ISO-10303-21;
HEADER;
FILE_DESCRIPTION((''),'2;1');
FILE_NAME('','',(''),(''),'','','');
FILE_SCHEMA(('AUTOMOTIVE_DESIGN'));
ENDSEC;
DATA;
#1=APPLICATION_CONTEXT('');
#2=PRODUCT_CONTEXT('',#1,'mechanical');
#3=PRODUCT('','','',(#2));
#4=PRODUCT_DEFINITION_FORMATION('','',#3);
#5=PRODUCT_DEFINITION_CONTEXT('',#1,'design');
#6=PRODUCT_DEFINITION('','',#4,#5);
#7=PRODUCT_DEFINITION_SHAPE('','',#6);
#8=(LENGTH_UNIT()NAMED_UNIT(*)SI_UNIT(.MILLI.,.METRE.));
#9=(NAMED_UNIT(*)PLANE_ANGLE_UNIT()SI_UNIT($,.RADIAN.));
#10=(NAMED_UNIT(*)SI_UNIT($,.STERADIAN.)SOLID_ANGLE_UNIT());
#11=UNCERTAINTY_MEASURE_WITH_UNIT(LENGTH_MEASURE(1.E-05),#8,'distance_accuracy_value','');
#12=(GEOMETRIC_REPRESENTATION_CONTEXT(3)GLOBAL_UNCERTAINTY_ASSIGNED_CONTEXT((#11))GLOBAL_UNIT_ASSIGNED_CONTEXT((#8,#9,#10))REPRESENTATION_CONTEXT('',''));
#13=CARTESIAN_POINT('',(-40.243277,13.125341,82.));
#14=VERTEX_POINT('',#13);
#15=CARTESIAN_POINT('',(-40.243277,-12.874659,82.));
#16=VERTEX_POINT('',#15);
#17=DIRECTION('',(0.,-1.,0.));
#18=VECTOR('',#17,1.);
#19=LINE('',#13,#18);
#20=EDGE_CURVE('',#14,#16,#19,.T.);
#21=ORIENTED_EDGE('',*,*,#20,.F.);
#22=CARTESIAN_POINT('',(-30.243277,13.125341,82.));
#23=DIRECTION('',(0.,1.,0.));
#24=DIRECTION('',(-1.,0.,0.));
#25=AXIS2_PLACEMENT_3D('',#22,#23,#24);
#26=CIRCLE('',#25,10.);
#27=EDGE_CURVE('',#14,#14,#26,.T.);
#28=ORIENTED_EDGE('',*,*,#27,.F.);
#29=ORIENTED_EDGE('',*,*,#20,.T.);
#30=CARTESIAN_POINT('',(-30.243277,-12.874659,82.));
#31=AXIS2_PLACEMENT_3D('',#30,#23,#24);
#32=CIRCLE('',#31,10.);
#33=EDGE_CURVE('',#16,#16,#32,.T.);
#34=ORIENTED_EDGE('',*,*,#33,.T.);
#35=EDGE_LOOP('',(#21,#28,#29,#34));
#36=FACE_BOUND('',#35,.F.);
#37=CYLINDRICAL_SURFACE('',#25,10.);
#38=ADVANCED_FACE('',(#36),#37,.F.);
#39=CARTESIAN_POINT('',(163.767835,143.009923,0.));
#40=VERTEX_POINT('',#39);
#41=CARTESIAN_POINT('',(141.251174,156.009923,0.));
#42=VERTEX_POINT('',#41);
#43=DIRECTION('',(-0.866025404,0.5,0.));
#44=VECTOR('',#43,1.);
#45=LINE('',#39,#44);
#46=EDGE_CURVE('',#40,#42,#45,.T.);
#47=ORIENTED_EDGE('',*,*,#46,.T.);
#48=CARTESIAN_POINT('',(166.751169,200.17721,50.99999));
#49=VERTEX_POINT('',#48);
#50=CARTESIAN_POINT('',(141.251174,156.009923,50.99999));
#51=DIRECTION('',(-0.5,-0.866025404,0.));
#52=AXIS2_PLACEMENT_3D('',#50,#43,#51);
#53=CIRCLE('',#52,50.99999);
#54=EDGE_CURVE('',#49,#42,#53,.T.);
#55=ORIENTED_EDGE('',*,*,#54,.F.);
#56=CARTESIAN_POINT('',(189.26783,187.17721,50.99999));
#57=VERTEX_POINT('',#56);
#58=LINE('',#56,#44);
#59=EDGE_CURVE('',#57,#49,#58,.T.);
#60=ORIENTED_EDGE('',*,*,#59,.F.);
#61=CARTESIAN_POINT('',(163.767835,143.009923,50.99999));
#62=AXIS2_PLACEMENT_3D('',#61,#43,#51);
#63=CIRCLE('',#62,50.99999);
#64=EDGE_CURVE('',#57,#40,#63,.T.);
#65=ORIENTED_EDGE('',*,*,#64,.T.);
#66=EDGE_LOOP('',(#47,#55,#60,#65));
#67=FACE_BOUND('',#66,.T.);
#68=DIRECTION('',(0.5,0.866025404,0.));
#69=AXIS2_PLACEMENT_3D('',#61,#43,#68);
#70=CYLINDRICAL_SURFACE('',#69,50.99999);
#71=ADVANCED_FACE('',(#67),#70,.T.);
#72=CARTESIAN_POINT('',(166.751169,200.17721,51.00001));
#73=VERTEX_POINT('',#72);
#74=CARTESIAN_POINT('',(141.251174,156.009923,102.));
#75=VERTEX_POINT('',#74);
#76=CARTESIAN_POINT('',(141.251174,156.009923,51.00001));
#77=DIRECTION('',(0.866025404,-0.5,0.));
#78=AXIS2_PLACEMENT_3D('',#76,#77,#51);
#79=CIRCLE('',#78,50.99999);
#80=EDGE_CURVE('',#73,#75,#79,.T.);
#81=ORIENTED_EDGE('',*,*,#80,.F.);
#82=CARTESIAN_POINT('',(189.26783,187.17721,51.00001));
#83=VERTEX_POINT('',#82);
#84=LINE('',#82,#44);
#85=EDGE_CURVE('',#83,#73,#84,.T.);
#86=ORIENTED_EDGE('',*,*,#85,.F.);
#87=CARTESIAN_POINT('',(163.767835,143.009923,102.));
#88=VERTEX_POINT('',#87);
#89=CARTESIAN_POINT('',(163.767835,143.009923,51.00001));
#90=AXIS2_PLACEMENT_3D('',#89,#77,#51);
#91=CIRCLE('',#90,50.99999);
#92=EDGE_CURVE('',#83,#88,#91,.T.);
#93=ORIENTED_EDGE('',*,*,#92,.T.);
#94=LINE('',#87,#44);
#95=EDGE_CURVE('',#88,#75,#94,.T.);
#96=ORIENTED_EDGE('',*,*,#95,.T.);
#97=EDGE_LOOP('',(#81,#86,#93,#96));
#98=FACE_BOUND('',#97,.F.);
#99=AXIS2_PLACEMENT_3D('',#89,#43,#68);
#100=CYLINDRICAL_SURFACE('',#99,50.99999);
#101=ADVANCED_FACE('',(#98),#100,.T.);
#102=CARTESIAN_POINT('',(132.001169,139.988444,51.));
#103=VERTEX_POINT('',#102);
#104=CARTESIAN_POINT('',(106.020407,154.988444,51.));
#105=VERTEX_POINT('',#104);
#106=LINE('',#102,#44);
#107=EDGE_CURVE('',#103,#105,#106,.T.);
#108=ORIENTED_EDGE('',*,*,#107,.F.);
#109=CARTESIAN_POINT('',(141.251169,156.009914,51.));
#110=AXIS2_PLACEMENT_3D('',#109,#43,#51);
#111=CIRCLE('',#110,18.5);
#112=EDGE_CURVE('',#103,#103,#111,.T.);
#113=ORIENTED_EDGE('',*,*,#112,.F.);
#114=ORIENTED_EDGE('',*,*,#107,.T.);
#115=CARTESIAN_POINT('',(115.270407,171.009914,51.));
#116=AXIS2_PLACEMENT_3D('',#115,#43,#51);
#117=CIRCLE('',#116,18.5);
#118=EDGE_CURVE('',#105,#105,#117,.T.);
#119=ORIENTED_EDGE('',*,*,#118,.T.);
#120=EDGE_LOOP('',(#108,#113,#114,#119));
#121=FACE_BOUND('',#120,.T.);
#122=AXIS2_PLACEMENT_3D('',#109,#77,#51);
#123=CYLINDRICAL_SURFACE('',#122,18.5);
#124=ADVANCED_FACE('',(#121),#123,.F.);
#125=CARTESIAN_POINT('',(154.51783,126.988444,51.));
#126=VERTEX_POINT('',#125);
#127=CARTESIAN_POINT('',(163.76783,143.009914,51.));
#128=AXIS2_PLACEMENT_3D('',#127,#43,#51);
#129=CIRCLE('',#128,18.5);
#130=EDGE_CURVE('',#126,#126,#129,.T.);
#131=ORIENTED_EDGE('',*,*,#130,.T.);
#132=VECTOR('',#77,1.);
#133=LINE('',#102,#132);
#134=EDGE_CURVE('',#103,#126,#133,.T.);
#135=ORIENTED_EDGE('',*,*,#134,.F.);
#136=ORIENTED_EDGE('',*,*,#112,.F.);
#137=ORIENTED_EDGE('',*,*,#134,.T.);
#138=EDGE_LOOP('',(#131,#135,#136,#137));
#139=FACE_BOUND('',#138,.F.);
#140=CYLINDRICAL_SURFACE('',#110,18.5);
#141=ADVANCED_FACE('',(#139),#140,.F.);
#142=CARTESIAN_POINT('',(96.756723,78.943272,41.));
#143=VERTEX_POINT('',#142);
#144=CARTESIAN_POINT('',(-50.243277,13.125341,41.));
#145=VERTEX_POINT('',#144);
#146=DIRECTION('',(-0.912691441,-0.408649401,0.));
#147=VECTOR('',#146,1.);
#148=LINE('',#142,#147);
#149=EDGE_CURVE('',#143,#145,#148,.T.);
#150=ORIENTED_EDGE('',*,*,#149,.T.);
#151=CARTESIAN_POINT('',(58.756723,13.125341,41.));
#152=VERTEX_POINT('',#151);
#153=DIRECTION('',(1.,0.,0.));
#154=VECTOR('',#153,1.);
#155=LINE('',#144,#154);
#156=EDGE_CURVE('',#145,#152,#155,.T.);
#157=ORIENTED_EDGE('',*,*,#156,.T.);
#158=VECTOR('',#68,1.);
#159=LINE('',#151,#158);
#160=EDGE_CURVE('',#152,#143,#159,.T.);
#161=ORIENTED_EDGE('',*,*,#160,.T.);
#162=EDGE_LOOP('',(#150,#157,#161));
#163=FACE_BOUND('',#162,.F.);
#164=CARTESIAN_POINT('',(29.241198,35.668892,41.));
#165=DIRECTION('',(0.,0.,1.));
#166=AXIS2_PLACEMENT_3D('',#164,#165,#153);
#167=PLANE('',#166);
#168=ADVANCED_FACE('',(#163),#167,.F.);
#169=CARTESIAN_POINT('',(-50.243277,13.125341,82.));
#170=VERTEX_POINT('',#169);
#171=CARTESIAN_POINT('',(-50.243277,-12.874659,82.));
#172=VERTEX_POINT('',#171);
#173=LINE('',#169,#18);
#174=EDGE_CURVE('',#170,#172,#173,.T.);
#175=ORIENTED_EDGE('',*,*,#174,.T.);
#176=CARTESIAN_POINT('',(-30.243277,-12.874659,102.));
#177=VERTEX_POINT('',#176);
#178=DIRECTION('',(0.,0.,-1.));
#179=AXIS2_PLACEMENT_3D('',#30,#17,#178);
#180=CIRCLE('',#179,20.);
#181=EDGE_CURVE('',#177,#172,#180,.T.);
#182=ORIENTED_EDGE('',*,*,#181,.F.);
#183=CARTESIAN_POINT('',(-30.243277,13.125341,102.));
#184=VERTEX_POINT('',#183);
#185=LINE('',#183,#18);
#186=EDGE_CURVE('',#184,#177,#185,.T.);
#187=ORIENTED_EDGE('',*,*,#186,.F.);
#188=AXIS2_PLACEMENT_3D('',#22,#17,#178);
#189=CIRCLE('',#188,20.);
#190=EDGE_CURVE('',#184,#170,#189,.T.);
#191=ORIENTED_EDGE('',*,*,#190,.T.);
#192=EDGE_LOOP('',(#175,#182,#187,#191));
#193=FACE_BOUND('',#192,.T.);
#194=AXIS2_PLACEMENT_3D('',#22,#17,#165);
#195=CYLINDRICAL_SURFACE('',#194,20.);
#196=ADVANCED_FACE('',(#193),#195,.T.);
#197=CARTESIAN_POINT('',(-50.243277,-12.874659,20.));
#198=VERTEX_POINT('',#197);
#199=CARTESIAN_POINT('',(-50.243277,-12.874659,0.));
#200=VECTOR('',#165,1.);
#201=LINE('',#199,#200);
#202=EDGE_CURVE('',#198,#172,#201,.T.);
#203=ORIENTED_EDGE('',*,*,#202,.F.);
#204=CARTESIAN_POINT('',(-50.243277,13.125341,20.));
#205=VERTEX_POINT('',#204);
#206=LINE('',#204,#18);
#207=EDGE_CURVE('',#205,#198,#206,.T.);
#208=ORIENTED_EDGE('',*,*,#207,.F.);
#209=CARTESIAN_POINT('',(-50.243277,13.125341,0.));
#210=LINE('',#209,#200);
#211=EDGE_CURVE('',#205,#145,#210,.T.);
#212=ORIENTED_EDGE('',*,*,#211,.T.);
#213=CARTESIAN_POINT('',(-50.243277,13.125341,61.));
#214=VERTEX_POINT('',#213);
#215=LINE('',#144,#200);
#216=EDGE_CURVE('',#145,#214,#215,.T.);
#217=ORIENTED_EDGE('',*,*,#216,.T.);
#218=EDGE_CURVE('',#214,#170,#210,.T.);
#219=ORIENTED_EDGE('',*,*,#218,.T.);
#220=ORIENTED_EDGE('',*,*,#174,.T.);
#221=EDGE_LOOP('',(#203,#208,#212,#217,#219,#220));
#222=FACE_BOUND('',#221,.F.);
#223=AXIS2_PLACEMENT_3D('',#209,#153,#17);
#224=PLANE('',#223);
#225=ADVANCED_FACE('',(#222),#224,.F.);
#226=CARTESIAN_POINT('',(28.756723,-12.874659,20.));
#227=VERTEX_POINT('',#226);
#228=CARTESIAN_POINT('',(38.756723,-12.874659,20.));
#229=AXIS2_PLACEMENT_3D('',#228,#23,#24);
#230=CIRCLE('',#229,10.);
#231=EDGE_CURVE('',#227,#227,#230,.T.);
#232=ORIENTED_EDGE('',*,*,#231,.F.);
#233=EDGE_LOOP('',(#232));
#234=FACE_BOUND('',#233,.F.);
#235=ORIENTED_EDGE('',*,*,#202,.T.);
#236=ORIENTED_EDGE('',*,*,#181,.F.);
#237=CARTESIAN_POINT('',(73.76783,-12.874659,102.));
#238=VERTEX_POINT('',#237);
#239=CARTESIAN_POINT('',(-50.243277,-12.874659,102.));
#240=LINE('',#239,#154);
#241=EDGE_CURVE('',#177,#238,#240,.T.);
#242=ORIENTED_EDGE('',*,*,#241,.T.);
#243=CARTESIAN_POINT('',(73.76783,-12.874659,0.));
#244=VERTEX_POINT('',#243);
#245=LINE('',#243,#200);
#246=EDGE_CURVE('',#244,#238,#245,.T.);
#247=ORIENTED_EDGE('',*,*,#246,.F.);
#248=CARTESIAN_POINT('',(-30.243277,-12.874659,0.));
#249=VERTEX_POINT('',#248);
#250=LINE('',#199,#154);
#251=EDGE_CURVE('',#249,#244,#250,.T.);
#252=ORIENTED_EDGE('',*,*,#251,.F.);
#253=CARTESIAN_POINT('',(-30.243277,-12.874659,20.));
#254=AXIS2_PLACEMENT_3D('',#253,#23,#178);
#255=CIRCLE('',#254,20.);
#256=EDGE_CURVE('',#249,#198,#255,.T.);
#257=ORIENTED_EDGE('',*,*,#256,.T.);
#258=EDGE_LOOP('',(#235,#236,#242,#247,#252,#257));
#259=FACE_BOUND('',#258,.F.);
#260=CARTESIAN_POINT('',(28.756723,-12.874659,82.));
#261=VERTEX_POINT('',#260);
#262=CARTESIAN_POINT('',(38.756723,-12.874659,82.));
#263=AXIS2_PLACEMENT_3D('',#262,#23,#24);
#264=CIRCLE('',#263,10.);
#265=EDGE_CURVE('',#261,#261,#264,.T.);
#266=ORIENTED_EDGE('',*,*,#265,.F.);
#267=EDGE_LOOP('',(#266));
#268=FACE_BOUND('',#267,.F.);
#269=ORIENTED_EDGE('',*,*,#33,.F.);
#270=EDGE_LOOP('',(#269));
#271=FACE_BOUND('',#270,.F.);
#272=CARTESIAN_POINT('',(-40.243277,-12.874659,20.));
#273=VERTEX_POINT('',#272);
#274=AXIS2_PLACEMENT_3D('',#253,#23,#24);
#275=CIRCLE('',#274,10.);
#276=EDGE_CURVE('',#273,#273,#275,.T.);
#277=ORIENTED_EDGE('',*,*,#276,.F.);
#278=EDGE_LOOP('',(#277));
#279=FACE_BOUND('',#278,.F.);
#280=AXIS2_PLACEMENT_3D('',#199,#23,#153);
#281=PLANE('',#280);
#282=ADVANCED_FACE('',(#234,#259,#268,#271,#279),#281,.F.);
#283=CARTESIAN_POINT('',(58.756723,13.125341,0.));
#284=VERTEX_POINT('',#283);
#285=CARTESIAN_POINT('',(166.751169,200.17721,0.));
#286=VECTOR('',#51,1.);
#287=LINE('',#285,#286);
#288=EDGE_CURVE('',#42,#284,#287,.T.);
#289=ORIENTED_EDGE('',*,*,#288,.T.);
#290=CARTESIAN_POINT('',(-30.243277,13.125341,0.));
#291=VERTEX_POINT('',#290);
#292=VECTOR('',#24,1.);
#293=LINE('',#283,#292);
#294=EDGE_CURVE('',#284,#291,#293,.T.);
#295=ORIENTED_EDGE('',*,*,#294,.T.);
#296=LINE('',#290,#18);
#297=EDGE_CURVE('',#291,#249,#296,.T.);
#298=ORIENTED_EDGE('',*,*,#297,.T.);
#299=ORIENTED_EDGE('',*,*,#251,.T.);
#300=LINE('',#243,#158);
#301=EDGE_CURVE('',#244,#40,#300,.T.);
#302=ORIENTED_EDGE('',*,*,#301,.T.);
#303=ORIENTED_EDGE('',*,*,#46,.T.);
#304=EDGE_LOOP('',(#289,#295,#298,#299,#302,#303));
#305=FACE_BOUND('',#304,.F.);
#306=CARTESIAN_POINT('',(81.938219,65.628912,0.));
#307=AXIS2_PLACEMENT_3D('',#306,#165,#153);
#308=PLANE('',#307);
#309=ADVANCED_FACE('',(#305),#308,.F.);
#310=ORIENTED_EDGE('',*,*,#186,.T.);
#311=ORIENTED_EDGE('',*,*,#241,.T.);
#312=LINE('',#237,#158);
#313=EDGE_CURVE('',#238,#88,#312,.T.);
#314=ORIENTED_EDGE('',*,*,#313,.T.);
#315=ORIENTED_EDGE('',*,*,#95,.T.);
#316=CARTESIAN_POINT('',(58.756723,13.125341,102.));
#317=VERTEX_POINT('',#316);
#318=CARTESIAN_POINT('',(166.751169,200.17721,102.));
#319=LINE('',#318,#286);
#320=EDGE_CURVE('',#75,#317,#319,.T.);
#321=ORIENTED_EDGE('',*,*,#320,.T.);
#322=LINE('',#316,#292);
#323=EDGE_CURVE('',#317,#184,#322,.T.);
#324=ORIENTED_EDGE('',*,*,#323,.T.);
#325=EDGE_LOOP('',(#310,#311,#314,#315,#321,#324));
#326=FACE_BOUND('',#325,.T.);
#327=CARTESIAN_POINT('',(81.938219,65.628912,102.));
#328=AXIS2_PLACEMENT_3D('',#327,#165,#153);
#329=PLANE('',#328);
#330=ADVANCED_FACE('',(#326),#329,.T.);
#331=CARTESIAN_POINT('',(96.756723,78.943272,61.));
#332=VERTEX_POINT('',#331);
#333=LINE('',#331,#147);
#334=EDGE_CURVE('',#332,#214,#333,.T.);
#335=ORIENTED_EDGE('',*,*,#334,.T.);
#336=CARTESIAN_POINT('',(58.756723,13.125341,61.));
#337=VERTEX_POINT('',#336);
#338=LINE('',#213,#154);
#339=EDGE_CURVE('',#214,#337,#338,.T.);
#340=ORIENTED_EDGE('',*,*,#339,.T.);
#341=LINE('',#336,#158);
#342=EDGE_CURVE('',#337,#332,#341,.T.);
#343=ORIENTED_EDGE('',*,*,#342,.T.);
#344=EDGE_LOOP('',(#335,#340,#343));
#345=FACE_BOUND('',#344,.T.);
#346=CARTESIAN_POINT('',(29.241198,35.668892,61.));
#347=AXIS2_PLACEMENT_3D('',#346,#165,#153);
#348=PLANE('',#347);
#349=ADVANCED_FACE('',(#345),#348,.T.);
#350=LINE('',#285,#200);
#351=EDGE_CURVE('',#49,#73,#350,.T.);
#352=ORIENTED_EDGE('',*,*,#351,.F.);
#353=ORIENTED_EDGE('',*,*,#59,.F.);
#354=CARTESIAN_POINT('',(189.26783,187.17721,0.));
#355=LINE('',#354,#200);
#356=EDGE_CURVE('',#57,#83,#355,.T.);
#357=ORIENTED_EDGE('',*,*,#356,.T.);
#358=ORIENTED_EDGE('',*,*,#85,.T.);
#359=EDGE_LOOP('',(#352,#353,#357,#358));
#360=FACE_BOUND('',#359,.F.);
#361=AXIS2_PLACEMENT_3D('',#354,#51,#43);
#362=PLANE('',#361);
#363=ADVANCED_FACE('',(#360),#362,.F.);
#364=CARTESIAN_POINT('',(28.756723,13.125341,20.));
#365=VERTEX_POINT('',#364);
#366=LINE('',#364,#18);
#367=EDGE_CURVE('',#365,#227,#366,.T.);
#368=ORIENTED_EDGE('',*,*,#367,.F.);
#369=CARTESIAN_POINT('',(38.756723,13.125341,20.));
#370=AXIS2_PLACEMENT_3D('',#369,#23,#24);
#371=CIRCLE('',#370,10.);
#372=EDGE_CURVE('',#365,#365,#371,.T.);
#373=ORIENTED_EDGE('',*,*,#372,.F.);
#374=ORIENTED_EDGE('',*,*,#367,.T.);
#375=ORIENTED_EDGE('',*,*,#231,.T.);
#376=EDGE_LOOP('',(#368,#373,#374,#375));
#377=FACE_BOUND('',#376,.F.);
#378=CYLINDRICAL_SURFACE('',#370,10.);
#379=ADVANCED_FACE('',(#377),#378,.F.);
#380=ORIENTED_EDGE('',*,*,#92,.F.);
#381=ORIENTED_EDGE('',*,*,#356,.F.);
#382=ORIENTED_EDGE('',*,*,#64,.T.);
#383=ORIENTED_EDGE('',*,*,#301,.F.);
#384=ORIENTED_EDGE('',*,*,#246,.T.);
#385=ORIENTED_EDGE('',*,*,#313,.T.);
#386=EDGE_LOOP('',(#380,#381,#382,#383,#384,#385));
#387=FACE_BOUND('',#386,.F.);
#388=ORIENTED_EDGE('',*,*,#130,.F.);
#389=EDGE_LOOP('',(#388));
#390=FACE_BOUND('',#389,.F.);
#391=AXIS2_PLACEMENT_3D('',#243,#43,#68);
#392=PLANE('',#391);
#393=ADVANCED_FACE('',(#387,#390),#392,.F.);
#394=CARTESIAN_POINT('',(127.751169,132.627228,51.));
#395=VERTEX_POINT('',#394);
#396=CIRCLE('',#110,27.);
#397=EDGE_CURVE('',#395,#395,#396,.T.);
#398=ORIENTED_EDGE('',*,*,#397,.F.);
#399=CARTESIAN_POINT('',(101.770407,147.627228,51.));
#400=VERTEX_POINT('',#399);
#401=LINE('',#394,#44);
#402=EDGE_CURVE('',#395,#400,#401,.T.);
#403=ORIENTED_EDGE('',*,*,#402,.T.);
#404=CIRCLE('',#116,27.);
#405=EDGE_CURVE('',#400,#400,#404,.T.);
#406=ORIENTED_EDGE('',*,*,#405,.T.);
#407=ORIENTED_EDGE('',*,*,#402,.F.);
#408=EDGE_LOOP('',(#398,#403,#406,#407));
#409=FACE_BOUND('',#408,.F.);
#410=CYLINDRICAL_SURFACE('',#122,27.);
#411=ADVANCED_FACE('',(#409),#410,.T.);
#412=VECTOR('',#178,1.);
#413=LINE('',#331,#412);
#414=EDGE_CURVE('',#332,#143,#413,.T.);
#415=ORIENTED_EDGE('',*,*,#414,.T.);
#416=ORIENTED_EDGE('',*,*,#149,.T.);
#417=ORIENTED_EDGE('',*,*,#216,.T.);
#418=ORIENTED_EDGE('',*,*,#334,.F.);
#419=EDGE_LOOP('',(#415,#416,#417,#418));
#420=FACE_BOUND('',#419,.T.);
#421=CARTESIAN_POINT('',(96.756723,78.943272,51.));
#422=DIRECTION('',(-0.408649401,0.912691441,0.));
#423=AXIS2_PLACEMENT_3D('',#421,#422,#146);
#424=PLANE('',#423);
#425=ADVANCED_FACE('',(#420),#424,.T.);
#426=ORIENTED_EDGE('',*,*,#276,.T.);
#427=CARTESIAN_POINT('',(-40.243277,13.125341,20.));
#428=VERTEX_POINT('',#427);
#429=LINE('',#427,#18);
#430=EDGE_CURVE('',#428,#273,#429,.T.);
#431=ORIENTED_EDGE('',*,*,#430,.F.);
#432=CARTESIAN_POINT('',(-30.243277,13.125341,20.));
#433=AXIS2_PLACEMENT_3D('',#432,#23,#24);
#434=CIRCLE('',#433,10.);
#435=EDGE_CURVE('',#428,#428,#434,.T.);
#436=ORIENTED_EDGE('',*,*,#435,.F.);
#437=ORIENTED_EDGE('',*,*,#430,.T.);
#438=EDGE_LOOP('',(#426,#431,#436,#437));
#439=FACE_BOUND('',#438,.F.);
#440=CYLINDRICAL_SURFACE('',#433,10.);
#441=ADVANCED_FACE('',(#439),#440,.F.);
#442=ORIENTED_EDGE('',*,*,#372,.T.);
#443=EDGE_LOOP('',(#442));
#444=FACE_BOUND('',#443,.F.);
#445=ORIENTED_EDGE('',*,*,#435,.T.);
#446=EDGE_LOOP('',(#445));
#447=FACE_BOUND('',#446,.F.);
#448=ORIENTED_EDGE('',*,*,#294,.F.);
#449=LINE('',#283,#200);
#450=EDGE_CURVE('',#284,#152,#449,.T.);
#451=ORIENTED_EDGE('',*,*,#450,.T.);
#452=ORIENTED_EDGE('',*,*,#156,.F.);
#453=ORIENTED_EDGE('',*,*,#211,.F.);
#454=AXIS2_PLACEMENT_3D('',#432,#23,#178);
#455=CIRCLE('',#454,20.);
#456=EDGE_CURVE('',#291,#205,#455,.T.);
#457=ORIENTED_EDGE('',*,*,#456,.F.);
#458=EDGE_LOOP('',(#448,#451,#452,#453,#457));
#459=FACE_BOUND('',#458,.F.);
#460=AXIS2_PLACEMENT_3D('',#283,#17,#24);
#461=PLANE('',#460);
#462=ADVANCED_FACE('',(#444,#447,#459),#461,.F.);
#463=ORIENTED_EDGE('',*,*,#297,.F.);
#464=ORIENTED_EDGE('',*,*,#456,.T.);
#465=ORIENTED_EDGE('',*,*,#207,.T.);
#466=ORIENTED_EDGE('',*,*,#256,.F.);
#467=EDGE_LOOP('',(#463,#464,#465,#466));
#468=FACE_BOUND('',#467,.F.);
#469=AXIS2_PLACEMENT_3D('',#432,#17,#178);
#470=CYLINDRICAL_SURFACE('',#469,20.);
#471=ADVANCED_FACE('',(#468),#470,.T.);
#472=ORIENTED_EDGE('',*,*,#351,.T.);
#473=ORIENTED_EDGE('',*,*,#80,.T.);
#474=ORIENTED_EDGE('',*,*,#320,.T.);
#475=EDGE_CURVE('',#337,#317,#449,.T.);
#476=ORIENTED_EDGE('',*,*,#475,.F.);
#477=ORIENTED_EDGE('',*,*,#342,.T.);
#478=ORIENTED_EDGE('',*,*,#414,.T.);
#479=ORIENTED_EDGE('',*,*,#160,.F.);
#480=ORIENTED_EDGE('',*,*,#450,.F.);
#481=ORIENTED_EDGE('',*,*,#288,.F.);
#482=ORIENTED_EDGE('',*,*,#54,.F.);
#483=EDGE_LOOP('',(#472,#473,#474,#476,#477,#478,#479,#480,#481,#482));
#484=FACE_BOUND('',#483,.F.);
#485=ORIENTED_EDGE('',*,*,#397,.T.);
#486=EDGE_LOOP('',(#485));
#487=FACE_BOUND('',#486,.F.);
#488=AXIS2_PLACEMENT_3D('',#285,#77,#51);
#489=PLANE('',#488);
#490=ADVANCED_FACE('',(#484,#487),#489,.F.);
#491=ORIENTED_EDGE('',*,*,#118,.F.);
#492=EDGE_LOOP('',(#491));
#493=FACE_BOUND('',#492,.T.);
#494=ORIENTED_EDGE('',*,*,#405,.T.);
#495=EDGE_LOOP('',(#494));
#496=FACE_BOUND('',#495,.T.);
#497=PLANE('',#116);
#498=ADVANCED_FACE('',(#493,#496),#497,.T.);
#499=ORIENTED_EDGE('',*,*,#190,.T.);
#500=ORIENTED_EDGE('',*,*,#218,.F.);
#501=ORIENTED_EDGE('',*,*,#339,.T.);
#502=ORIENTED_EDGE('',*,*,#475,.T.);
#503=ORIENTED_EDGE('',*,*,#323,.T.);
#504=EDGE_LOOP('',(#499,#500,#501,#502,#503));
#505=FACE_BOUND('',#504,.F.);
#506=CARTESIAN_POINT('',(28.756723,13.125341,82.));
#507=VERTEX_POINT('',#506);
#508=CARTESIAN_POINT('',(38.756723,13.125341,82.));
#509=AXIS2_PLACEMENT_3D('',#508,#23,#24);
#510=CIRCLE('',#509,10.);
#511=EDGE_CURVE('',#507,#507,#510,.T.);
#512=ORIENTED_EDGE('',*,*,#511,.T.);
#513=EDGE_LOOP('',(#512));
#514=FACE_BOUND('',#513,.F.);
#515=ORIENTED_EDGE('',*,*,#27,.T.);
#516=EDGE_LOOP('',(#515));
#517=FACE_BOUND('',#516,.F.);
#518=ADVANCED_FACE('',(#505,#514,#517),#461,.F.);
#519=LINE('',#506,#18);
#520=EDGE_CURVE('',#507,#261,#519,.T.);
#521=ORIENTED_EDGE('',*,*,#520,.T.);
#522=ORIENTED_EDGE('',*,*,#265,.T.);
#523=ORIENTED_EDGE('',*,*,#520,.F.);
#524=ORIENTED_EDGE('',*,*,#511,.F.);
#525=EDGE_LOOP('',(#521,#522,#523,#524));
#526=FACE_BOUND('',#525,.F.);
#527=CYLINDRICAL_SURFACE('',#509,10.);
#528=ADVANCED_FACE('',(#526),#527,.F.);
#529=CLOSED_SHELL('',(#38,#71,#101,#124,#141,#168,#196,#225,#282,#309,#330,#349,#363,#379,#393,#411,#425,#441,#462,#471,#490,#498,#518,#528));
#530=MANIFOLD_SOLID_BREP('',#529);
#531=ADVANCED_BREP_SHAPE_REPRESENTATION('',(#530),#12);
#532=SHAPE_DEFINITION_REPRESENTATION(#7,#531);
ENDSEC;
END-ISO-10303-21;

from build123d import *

# Parameters (mm, degrees)
F1_DEPTH  = 102
F2_R      = 50.99999
F3_R      = 27
F3_R_2    = 18.5
F4_DEPTH  = 30
F7_DEPTH  = 10
F8_R      = 18.5
F9_DEPTH  = 26
F10_R     = 20
F11_R     = 10
F12_DEPTH = 26


# Not quite as in the source:
# - a fillet or chamfer is up to 0.001 mm smaller than in the source, because OpenCascade refuses the exact size


with BuildPart() as f1:
    # F0 (on Top) → F1 (new body)
    with BuildSketch(Plane.XY):
        Polygon((-50.2432771027, 13.1253414819), (-50.2432771027, -12.8746585181), (73.7678298962, -12.8746585181), (189.2678298962, 187.1772097561), (166.7511693978, 200.1772097561), (58.7567228973, 13.1253414819), align=None)
    extrude(amount=F1_DEPTH)

    # F2 (radius 51 in the source; OpenCascade refuses exactly that, so slightly less here)
    f2_edges = [f1.edges().sort_by_distance(p)[0] for p in [
        (178.0095, 193.67721, 0),
        (178.0095, 193.67721, 102),
    ]]
    fillet(f2_edges, radius=F2_R)

    # F3 (on face) → F4 (join)
    with BuildSketch(Plane(origin=(38.3841025946, -22.1610719656, 0), x_dir=(-0.5, -0.8660254038, 0), z_dir=(-0.8660254038, 0.5, 0))):
        with Locations((-205.7341336064, 51)):
            Circle(F3_R)
        with Locations((-205.7341336064, 51)):
            Circle(F3_R_2, mode=Mode.SUBTRACT)
    extrude(amount=F4_DEPTH)

    # F6 (on offset) → F7 (join, symmetric)
    with BuildSketch(Plane.XY.offset(51)):
        Polygon((96.7567228973, 78.9432721695), (-50.2432771027, 13.1253414819), (58.7567228973, 13.1253414819), align=None)
    extrude(amount=F7_DEPTH, both=True)

    # F8 (on face) → F9 (cut)
    with BuildSketch(Plane(origin=(38.3841025946, -22.1610719656, 0), x_dir=(-0.5, -0.8660254038, 0), z_dir=(-0.8660254038, 0.5, 0))):
        with Locations((-205.7341336064, 51)):
            Circle(F8_R)
    extrude(amount=-F9_DEPTH, mode=Mode.SUBTRACT)

    # F10
    f10_edges = [f1.edges().sort_by_distance(p)[0] for p in [
        (-50.243277, 0.125341, 0),
        (-50.243277, 0.125341, 102),
    ]]
    fillet(f10_edges, radius=F10_R)

    # F11 (on face) → F12 (cut)
    with BuildSketch(Plane(origin=(0, 13.1253414819, 0), x_dir=(-1, 0, 0), z_dir=(0, 1, 0))):
        with Locations((30.2432771027, 20)):
            Circle(F11_R)
        with Locations((30.2432771027, 82)):
            Circle(F11_R)
        with Locations((-38.7567228973, 20)):
            Circle(F11_R)
        with Locations((-38.7567228973, 82)):
            Circle(F11_R)
    extrude(amount=-F12_DEPTH, mode=Mode.SUBTRACT)


solid = f1.part
